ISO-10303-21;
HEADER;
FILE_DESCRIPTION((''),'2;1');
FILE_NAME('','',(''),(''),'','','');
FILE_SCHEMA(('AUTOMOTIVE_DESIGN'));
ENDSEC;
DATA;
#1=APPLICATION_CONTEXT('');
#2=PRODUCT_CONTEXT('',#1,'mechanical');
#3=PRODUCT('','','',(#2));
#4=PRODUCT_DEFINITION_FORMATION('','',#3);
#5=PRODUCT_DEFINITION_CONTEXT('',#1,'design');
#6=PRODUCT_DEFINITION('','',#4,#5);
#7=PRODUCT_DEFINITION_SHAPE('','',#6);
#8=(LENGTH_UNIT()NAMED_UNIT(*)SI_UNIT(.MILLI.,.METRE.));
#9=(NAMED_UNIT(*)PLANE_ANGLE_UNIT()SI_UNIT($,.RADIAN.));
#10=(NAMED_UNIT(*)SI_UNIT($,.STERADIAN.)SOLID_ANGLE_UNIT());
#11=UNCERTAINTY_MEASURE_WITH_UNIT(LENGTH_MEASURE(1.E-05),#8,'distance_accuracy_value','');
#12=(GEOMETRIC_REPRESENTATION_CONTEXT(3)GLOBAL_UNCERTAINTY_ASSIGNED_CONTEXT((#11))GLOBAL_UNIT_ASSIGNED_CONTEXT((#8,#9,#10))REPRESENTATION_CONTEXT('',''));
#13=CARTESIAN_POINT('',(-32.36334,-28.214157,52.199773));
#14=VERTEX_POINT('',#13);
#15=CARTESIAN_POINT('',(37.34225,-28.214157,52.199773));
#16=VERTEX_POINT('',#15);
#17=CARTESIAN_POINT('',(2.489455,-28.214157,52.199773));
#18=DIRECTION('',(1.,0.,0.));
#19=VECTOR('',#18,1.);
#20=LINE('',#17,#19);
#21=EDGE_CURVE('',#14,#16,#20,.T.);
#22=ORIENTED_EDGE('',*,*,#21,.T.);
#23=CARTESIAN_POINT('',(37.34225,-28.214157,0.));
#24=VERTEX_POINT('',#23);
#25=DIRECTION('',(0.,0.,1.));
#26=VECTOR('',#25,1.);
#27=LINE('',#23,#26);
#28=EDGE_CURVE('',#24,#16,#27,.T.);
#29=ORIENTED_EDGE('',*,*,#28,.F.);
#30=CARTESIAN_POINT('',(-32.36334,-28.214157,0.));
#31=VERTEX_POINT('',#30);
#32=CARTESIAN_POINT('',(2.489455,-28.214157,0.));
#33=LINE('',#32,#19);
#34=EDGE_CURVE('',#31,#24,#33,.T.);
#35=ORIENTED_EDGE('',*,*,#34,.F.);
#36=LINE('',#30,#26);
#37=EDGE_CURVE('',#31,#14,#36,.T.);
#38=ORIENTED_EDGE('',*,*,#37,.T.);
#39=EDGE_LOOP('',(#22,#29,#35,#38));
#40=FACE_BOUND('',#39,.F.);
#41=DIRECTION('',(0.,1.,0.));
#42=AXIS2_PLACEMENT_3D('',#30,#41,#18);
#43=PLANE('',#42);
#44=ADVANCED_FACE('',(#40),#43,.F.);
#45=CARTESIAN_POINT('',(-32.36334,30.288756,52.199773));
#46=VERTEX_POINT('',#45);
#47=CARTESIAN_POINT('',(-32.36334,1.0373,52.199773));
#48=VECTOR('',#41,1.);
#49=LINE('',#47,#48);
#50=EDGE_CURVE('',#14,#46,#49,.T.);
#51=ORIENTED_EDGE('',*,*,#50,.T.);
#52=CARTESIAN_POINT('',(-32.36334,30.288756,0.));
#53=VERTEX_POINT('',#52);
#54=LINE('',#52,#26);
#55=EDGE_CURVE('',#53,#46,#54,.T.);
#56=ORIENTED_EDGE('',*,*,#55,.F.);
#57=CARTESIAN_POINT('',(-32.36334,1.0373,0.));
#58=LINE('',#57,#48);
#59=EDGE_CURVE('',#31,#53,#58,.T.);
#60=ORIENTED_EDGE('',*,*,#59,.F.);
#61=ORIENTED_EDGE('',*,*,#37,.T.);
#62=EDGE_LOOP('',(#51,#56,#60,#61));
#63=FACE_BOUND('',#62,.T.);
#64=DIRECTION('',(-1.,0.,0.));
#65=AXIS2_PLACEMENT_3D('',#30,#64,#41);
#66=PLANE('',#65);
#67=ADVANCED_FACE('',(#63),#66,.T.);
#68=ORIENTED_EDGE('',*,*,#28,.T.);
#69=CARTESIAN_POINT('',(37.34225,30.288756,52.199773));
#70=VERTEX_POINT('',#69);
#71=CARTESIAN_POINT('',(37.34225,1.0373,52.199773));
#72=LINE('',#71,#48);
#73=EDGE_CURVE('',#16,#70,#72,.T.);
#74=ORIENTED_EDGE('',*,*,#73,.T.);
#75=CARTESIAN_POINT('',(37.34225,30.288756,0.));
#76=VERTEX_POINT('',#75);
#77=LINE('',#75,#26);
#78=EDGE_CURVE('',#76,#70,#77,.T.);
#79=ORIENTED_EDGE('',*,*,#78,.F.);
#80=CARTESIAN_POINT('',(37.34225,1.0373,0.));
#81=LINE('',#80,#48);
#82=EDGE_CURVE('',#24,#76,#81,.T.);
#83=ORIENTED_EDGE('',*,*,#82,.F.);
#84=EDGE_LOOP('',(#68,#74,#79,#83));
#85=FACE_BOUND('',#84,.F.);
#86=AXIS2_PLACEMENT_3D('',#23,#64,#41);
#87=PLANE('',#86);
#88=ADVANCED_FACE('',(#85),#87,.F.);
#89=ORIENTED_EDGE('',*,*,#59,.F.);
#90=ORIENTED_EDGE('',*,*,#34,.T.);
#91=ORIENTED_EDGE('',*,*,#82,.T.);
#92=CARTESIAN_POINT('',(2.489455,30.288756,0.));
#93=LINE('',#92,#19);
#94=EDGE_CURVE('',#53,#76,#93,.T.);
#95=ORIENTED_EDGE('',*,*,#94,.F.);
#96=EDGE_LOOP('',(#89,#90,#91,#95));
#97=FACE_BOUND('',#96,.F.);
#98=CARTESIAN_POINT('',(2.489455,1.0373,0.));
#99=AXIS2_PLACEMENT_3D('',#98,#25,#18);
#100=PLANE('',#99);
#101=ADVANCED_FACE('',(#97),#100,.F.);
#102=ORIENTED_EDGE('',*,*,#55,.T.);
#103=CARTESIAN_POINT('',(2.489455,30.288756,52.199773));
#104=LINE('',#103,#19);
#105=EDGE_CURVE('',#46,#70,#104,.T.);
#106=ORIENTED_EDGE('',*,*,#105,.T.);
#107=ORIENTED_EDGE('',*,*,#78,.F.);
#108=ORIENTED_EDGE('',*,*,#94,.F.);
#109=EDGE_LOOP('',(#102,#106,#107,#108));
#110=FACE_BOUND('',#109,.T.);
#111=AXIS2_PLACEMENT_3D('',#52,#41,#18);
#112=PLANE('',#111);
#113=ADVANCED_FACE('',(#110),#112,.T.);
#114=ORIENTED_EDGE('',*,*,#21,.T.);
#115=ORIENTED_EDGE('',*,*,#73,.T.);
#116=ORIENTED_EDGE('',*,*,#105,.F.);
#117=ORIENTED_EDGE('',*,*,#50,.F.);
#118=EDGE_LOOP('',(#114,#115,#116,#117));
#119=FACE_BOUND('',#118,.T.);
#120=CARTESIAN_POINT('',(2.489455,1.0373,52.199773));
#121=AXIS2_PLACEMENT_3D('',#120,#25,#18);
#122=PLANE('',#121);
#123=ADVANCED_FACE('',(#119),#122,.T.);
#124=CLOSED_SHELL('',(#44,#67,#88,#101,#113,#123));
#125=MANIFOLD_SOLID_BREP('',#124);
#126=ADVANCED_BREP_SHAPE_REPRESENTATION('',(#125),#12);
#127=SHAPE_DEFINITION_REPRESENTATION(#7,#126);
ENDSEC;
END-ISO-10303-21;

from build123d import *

# Parameters (mm, degrees)
F1_W     = 69.7055906057
F1_H     = 58.5029125214
F2_DEPTH = 52.1997734904


# Not quite as in the source:
# - the program builds the solid bodies; features that only make, move or delete a surface that nothing else refers to are left out


with BuildPart() as f2:
    # F1 (on face) → F2 (new body)
    with BuildSketch(Plane.XY):
        with Locations((2.4894550443, 1.037299633)):
            Rectangle(F1_W, F1_H)
    extrude(amount=F2_DEPTH)


solid = f2.part
